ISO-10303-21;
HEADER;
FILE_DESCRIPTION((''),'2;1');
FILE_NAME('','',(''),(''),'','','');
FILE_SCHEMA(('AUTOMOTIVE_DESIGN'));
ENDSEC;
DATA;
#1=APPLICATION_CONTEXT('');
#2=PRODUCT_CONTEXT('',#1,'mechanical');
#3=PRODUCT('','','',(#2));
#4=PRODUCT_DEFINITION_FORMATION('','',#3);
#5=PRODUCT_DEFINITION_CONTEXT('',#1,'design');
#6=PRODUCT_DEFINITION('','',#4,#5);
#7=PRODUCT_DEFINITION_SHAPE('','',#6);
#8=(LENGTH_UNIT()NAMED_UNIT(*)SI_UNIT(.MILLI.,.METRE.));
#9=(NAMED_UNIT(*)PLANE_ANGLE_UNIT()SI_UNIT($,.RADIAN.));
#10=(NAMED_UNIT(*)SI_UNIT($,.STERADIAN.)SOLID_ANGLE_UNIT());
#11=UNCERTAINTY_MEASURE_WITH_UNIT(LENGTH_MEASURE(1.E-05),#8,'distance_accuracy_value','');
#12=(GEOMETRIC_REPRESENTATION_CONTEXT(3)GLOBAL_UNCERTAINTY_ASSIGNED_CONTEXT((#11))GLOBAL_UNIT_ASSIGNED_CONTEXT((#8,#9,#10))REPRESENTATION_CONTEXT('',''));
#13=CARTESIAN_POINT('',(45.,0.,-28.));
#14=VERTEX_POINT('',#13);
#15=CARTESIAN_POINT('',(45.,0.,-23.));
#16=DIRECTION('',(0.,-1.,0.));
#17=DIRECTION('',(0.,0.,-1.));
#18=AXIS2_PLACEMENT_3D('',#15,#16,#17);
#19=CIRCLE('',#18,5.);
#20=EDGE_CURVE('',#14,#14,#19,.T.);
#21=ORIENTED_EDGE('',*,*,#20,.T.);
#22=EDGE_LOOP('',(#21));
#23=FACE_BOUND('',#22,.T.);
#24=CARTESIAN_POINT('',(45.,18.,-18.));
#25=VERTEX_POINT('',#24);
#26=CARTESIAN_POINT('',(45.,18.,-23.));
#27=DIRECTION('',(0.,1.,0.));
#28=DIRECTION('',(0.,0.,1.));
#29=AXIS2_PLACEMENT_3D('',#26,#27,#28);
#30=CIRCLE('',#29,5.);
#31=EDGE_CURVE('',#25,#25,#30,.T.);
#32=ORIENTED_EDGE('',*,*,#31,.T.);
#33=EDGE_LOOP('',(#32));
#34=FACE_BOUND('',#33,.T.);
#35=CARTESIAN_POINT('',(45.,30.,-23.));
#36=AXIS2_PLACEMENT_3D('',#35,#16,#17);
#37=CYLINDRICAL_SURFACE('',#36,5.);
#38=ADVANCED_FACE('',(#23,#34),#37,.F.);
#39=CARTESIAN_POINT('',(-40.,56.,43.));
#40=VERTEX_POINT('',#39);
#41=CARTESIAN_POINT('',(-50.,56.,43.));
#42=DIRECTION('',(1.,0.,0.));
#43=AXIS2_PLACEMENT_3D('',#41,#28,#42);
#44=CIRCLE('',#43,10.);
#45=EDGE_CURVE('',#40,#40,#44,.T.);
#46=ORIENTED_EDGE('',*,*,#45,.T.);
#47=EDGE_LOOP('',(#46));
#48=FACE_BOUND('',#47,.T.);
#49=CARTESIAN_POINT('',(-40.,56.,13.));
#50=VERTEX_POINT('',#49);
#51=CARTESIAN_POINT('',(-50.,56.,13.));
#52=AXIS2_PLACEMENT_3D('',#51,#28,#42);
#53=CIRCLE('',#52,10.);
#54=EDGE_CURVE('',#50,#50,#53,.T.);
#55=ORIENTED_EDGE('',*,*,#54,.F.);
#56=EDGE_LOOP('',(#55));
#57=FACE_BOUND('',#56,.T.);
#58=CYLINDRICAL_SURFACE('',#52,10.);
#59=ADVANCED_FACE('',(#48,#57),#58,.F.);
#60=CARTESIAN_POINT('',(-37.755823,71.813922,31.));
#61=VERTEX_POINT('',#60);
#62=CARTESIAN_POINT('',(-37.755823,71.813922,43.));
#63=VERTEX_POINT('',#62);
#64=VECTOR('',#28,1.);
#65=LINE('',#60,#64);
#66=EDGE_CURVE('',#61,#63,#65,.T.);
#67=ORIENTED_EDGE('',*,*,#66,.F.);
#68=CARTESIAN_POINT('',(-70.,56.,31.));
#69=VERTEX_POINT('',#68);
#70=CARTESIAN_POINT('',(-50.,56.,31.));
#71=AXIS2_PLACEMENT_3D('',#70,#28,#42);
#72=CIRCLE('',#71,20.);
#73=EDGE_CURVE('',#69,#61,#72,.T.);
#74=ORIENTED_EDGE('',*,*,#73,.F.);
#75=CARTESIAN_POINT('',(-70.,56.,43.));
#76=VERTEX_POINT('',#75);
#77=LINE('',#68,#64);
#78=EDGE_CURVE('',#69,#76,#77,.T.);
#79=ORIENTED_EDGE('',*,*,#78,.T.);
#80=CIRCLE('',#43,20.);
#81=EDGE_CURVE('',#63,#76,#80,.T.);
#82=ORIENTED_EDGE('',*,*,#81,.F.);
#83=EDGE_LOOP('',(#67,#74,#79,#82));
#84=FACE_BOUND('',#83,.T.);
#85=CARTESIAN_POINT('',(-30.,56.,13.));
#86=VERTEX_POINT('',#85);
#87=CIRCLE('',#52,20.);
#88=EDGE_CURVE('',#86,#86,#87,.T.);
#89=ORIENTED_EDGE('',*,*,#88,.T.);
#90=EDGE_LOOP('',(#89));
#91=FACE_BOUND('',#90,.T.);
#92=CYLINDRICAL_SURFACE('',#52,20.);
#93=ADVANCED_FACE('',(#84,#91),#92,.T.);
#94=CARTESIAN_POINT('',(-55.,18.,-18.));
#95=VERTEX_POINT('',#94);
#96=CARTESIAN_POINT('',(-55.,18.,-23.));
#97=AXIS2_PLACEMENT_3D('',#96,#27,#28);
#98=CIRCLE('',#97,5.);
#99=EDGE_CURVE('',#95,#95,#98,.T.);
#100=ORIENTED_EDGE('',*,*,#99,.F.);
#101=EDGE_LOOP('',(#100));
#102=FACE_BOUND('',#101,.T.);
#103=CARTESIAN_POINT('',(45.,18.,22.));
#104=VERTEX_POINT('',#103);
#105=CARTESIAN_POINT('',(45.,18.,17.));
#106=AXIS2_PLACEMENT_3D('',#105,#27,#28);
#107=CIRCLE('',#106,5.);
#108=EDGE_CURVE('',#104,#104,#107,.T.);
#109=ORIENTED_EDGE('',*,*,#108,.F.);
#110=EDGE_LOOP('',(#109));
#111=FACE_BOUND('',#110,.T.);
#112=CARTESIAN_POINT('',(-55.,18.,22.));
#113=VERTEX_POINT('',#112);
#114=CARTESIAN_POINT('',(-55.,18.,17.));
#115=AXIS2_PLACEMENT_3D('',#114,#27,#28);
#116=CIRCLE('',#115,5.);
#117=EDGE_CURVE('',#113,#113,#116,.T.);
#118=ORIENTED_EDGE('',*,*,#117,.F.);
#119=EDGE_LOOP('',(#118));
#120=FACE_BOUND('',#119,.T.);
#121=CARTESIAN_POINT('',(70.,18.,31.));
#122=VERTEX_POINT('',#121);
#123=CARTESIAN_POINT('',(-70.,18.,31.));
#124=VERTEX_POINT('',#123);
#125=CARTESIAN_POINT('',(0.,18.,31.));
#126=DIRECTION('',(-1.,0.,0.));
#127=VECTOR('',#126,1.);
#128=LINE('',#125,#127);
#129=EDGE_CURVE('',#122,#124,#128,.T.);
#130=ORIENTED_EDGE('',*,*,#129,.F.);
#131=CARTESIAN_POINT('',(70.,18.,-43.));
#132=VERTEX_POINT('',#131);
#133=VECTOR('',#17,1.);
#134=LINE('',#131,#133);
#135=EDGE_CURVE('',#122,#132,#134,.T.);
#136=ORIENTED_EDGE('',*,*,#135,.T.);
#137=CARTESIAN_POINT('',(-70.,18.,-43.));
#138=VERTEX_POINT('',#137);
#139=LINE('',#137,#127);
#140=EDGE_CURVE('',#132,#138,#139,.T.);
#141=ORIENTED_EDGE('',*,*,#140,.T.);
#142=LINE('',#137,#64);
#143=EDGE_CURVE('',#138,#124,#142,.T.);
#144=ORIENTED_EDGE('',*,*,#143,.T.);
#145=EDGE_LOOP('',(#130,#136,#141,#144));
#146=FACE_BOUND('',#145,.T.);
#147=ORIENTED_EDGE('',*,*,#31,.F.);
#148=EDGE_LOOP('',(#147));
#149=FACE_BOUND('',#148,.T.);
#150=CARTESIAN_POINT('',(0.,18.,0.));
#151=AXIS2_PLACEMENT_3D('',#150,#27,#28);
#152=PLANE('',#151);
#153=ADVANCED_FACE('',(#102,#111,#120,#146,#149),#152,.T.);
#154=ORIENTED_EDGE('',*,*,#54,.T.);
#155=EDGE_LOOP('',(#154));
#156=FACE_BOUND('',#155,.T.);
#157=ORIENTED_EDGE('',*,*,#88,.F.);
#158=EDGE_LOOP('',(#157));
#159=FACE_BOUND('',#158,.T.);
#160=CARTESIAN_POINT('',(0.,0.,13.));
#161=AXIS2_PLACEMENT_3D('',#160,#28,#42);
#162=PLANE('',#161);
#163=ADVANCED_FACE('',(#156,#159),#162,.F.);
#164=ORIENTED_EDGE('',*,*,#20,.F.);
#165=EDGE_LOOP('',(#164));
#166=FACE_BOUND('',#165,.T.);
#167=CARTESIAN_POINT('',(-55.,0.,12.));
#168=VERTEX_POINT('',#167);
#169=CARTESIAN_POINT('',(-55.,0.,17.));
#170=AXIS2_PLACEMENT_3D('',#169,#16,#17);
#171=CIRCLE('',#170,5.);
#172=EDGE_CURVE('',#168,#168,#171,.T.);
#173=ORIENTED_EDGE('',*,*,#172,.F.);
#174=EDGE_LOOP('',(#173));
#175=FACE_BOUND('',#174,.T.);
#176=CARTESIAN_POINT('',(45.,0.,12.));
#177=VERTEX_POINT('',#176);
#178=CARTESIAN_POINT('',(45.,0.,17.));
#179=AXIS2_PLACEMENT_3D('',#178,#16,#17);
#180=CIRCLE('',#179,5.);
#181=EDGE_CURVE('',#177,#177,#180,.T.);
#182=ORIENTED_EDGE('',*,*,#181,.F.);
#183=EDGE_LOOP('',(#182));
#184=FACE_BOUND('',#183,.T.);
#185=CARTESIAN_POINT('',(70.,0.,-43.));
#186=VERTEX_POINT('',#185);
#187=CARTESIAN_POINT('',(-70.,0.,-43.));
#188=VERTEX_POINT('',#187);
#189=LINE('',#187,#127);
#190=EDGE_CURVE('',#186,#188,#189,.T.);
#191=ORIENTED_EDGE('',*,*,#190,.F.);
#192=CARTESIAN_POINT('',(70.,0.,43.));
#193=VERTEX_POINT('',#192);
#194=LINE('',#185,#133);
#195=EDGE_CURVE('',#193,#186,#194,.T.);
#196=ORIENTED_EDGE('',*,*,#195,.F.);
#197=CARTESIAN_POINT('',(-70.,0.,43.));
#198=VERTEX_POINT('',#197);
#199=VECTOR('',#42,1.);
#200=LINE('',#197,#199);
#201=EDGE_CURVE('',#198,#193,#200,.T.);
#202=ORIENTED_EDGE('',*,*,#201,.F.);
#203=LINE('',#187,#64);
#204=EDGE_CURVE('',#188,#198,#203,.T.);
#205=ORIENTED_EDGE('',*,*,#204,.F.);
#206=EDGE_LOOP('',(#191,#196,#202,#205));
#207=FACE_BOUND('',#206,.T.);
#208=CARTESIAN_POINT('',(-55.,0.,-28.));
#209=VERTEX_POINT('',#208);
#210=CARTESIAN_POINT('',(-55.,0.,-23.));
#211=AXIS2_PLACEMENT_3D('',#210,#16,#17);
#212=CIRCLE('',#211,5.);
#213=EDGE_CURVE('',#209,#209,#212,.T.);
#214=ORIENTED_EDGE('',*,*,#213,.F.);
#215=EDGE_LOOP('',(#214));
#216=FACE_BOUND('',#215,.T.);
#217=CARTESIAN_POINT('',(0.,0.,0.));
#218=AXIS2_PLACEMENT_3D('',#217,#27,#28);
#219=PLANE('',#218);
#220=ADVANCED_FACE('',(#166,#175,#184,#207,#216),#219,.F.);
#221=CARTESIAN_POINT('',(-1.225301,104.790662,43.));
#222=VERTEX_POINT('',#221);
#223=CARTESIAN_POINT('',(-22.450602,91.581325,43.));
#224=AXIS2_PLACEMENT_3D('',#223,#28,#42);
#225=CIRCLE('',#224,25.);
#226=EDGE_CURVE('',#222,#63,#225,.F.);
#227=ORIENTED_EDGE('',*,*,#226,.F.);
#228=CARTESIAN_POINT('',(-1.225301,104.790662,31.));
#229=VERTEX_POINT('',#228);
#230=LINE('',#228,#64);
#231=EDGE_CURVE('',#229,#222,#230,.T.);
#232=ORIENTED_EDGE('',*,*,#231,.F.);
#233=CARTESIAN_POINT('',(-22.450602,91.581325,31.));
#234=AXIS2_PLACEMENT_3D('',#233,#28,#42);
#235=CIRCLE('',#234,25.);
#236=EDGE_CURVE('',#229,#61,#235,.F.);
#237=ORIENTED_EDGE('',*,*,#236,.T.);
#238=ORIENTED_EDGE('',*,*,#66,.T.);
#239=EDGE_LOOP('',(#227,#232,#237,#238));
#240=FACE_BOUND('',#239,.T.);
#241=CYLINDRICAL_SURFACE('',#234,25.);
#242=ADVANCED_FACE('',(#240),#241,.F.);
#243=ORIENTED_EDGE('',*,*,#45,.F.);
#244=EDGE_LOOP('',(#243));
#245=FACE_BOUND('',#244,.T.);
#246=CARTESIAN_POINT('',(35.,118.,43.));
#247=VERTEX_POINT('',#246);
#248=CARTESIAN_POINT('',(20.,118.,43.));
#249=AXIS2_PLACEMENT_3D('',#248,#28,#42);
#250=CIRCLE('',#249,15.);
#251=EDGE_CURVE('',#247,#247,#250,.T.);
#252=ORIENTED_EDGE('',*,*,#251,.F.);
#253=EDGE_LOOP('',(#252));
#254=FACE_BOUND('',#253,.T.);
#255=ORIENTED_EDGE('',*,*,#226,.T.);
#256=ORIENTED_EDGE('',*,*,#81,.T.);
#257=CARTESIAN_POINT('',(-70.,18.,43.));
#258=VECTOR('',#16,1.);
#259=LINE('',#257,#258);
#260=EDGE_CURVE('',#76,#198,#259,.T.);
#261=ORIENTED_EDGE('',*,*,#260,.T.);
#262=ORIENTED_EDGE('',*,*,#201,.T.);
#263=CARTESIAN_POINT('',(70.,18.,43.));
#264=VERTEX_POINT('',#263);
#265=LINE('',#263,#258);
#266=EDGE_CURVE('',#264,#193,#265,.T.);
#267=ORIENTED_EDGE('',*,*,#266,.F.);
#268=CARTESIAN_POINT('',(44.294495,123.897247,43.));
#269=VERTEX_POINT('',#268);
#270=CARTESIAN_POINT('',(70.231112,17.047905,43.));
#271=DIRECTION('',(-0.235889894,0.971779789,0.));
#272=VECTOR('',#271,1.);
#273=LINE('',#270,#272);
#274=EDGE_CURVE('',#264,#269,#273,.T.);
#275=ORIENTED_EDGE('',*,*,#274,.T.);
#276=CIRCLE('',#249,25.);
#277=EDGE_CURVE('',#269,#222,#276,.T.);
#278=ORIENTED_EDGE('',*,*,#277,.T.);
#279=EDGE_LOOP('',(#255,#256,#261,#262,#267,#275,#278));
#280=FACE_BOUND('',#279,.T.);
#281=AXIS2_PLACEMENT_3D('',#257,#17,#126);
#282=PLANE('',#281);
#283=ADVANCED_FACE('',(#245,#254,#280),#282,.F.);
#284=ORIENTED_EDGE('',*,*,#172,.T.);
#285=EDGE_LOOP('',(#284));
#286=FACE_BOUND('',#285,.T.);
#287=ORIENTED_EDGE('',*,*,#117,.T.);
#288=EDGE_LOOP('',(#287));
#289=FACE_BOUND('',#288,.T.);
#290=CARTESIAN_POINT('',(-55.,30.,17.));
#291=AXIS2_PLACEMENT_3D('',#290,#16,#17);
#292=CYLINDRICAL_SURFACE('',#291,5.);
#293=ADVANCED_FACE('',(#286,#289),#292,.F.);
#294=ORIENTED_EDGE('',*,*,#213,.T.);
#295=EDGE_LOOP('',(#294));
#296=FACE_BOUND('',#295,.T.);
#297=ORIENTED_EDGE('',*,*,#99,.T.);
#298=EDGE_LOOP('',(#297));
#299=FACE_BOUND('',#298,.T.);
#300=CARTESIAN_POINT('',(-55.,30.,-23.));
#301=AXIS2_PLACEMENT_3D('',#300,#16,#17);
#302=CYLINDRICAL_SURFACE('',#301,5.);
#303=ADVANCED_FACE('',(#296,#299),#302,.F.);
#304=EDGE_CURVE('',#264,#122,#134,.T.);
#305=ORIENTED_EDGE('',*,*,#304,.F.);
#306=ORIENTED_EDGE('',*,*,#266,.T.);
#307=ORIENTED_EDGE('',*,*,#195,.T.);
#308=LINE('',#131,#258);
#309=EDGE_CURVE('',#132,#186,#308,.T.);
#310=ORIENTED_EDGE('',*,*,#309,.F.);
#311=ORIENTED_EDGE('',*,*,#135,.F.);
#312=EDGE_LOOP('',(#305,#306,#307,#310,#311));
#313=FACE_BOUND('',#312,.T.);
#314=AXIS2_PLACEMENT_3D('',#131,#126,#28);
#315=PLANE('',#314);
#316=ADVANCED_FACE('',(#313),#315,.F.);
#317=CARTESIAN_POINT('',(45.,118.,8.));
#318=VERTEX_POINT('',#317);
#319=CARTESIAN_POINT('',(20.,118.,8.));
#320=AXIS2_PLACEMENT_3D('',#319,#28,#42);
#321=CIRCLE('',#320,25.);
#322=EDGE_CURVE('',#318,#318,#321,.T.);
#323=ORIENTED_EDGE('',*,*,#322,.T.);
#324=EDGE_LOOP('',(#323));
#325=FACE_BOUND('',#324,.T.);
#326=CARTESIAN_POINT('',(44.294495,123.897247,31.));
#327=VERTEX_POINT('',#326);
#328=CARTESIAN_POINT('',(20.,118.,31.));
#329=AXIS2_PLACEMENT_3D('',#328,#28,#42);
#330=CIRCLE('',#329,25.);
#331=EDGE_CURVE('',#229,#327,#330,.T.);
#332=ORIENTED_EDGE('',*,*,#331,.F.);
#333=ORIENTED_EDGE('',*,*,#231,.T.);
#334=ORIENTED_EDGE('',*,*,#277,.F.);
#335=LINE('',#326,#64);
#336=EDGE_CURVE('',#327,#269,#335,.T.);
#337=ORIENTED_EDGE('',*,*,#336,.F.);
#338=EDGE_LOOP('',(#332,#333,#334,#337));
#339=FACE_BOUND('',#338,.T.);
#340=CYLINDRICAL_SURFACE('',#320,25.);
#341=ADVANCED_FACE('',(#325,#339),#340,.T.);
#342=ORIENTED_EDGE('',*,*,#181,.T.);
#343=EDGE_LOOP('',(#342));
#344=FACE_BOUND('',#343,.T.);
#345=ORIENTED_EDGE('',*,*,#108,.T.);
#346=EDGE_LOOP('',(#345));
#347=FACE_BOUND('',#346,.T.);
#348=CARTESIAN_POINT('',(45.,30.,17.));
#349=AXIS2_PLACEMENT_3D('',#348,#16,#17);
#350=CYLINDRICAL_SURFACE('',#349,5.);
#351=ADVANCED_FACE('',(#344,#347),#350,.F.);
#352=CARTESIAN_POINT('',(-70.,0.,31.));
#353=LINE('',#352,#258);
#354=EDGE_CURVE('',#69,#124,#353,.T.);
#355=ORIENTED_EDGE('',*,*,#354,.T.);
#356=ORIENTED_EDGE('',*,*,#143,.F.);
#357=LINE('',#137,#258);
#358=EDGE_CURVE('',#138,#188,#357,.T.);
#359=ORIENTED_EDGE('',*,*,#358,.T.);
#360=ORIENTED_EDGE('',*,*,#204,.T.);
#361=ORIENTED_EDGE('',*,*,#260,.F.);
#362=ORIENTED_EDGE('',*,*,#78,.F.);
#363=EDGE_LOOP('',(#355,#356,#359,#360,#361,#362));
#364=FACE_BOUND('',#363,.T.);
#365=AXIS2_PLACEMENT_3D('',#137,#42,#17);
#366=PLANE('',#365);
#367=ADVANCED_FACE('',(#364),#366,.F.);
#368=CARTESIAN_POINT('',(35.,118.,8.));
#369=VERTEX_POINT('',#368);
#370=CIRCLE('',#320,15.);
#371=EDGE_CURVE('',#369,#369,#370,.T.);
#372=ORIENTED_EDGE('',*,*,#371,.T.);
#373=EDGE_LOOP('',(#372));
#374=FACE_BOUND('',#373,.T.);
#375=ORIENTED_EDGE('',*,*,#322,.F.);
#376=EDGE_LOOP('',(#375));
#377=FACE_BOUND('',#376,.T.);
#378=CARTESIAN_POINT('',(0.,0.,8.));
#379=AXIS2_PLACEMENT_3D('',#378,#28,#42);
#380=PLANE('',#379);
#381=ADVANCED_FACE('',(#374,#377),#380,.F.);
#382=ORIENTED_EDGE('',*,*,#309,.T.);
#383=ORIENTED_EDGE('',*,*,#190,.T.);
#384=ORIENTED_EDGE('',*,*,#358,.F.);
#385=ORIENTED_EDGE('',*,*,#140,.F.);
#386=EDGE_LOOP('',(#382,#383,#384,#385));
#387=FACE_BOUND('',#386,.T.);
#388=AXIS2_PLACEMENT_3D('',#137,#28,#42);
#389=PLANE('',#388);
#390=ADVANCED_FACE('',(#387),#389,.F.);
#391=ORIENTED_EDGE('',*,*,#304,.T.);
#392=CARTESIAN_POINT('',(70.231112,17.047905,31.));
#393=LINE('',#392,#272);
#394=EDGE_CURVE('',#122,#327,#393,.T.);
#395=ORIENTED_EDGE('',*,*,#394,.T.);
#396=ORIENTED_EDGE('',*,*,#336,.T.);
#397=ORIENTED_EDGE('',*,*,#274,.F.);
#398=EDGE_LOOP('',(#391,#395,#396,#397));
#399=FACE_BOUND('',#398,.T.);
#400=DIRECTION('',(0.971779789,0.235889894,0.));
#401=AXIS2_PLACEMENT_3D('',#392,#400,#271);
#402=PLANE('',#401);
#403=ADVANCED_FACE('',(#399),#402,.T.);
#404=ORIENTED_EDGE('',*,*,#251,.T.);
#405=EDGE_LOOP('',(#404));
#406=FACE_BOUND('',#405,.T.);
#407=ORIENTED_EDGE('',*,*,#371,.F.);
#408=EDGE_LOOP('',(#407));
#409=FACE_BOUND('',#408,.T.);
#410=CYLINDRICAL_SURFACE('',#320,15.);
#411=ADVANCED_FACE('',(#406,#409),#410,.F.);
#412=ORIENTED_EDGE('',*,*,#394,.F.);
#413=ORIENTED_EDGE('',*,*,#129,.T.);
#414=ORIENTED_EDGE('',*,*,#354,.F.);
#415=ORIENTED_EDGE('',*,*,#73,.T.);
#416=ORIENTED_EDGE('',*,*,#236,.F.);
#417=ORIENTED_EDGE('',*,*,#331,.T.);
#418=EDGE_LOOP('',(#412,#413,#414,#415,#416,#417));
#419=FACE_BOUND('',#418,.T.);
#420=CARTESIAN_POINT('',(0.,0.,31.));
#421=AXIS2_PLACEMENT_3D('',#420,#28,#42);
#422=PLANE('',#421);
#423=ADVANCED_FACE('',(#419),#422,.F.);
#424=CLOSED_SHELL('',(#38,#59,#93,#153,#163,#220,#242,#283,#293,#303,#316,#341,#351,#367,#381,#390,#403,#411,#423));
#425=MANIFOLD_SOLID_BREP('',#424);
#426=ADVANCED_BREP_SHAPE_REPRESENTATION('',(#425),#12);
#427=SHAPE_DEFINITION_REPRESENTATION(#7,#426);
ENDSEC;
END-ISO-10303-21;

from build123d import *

# Parameters (mm, degrees)
SKETCH1_W            = 140
SKETCH1_H            = 86
BOSS_EXTRUDE1_DEPTH  = 18
BOSS_EXTRUDE2_DEPTH  = 12
SKETCH2_4_R          = 25
SKETCH2_4_R_2        = 15
BOSS_EXTRUDE3_DEPTH  = 35
SKETCH2_6_R          = 20
SKETCH2_6_R_2        = 10
BOSS_EXTRUDE4_DEPTH  = 30
HOLE1_OUTLINE_R      = 5
HOLE1_DEPTH          = 18
LPATTERN1_COUNT      = 2
LPATTERN1_PITCH      = 100
LPATTERN1_COUNT_DIR2 = 2
LPATTERN1_PITCH_DIR2 = 40


# Read off the part's stored shape, not the designer's step: Hole1
with BuildPart() as part:
    # Sketch1 → Boss-Extrude1 (new body)
    with BuildSketch(Plane(origin=(0, 0, 0), x_dir=(1, 0, 0), z_dir=(0, 1, 0))):
        Rectangle(SKETCH1_W, SKETCH1_H)
    extrude(amount=BOSS_EXTRUDE1_DEPTH)

    # Sketch2 → Boss-Extrude2 (add)
    with BuildSketch(Plane.XY.offset(43)):
        with BuildLine():
            ThreePointArc((-30, 56), (-50, 36), (-70, 56))
            Line((-70, 56), (-70, 18))
            Line((-70, 18), (70, 18))
            Line((70, 18), (44.294494718, 123.897247359))
            ThreePointArc((44.294494718, 123.897247359), (44.822997079, 120.969649142), (45, 118))
            ThreePointArc((45, 118), (26.869042098, 93.962191018), (-1.225300853, 104.790662253))
            ThreePointArc((-1.225300853, 104.790662253), (-5.698641076, 73.02406676), (-37.75582298, 71.813922003))
            ThreePointArc((-37.75582298, 71.813922003), (-32.043336329, 64.80671504), (-30, 56))
        make_face()
    extrude(amount=-BOSS_EXTRUDE2_DEPTH)

    # Sketch2<4> → Boss-Extrude3 (add)
    with BuildSketch(Plane.XY.offset(43)):
        with Locations((20, 118)):
            Circle(SKETCH2_4_R)
        with Locations((20, 118)):
            Circle(SKETCH2_4_R_2, mode=Mode.SUBTRACT)
    extrude(amount=-BOSS_EXTRUDE3_DEPTH)

    # Sketch2<6> → Boss-Extrude4 (add)
    with BuildSketch(Plane.XY.offset(43)):
        with Locations((-50, 56)):
            Circle(SKETCH2_6_R)
        with Locations((-50, 56)):
            Circle(SKETCH2_6_R_2, mode=Mode.SUBTRACT)
    extrude(amount=-BOSS_EXTRUDE4_DEPTH)

    # Hole1 outline → Hole1 (cut)
    with BuildSketch(Plane(origin=(0, 0, 0), x_dir=(1, 0, 0), z_dir=(0, 1, 0))):
        with Locations((-55, 23)):
            Circle(HOLE1_OUTLINE_R)
    hole1 = extrude(amount=HOLE1_DEPTH, mode=Mode.SUBTRACT)

    # LPattern1: Hole1 2 × 2
    with Locations(*[(i * LPATTERN1_PITCH, 0, j * LPATTERN1_PITCH_DIR2) for i in range(LPATTERN1_COUNT) for j in range(LPATTERN1_COUNT_DIR2) if (i, j) != (0, 0)]):
        add(hole1, mode=Mode.SUBTRACT)


solid = part.part
